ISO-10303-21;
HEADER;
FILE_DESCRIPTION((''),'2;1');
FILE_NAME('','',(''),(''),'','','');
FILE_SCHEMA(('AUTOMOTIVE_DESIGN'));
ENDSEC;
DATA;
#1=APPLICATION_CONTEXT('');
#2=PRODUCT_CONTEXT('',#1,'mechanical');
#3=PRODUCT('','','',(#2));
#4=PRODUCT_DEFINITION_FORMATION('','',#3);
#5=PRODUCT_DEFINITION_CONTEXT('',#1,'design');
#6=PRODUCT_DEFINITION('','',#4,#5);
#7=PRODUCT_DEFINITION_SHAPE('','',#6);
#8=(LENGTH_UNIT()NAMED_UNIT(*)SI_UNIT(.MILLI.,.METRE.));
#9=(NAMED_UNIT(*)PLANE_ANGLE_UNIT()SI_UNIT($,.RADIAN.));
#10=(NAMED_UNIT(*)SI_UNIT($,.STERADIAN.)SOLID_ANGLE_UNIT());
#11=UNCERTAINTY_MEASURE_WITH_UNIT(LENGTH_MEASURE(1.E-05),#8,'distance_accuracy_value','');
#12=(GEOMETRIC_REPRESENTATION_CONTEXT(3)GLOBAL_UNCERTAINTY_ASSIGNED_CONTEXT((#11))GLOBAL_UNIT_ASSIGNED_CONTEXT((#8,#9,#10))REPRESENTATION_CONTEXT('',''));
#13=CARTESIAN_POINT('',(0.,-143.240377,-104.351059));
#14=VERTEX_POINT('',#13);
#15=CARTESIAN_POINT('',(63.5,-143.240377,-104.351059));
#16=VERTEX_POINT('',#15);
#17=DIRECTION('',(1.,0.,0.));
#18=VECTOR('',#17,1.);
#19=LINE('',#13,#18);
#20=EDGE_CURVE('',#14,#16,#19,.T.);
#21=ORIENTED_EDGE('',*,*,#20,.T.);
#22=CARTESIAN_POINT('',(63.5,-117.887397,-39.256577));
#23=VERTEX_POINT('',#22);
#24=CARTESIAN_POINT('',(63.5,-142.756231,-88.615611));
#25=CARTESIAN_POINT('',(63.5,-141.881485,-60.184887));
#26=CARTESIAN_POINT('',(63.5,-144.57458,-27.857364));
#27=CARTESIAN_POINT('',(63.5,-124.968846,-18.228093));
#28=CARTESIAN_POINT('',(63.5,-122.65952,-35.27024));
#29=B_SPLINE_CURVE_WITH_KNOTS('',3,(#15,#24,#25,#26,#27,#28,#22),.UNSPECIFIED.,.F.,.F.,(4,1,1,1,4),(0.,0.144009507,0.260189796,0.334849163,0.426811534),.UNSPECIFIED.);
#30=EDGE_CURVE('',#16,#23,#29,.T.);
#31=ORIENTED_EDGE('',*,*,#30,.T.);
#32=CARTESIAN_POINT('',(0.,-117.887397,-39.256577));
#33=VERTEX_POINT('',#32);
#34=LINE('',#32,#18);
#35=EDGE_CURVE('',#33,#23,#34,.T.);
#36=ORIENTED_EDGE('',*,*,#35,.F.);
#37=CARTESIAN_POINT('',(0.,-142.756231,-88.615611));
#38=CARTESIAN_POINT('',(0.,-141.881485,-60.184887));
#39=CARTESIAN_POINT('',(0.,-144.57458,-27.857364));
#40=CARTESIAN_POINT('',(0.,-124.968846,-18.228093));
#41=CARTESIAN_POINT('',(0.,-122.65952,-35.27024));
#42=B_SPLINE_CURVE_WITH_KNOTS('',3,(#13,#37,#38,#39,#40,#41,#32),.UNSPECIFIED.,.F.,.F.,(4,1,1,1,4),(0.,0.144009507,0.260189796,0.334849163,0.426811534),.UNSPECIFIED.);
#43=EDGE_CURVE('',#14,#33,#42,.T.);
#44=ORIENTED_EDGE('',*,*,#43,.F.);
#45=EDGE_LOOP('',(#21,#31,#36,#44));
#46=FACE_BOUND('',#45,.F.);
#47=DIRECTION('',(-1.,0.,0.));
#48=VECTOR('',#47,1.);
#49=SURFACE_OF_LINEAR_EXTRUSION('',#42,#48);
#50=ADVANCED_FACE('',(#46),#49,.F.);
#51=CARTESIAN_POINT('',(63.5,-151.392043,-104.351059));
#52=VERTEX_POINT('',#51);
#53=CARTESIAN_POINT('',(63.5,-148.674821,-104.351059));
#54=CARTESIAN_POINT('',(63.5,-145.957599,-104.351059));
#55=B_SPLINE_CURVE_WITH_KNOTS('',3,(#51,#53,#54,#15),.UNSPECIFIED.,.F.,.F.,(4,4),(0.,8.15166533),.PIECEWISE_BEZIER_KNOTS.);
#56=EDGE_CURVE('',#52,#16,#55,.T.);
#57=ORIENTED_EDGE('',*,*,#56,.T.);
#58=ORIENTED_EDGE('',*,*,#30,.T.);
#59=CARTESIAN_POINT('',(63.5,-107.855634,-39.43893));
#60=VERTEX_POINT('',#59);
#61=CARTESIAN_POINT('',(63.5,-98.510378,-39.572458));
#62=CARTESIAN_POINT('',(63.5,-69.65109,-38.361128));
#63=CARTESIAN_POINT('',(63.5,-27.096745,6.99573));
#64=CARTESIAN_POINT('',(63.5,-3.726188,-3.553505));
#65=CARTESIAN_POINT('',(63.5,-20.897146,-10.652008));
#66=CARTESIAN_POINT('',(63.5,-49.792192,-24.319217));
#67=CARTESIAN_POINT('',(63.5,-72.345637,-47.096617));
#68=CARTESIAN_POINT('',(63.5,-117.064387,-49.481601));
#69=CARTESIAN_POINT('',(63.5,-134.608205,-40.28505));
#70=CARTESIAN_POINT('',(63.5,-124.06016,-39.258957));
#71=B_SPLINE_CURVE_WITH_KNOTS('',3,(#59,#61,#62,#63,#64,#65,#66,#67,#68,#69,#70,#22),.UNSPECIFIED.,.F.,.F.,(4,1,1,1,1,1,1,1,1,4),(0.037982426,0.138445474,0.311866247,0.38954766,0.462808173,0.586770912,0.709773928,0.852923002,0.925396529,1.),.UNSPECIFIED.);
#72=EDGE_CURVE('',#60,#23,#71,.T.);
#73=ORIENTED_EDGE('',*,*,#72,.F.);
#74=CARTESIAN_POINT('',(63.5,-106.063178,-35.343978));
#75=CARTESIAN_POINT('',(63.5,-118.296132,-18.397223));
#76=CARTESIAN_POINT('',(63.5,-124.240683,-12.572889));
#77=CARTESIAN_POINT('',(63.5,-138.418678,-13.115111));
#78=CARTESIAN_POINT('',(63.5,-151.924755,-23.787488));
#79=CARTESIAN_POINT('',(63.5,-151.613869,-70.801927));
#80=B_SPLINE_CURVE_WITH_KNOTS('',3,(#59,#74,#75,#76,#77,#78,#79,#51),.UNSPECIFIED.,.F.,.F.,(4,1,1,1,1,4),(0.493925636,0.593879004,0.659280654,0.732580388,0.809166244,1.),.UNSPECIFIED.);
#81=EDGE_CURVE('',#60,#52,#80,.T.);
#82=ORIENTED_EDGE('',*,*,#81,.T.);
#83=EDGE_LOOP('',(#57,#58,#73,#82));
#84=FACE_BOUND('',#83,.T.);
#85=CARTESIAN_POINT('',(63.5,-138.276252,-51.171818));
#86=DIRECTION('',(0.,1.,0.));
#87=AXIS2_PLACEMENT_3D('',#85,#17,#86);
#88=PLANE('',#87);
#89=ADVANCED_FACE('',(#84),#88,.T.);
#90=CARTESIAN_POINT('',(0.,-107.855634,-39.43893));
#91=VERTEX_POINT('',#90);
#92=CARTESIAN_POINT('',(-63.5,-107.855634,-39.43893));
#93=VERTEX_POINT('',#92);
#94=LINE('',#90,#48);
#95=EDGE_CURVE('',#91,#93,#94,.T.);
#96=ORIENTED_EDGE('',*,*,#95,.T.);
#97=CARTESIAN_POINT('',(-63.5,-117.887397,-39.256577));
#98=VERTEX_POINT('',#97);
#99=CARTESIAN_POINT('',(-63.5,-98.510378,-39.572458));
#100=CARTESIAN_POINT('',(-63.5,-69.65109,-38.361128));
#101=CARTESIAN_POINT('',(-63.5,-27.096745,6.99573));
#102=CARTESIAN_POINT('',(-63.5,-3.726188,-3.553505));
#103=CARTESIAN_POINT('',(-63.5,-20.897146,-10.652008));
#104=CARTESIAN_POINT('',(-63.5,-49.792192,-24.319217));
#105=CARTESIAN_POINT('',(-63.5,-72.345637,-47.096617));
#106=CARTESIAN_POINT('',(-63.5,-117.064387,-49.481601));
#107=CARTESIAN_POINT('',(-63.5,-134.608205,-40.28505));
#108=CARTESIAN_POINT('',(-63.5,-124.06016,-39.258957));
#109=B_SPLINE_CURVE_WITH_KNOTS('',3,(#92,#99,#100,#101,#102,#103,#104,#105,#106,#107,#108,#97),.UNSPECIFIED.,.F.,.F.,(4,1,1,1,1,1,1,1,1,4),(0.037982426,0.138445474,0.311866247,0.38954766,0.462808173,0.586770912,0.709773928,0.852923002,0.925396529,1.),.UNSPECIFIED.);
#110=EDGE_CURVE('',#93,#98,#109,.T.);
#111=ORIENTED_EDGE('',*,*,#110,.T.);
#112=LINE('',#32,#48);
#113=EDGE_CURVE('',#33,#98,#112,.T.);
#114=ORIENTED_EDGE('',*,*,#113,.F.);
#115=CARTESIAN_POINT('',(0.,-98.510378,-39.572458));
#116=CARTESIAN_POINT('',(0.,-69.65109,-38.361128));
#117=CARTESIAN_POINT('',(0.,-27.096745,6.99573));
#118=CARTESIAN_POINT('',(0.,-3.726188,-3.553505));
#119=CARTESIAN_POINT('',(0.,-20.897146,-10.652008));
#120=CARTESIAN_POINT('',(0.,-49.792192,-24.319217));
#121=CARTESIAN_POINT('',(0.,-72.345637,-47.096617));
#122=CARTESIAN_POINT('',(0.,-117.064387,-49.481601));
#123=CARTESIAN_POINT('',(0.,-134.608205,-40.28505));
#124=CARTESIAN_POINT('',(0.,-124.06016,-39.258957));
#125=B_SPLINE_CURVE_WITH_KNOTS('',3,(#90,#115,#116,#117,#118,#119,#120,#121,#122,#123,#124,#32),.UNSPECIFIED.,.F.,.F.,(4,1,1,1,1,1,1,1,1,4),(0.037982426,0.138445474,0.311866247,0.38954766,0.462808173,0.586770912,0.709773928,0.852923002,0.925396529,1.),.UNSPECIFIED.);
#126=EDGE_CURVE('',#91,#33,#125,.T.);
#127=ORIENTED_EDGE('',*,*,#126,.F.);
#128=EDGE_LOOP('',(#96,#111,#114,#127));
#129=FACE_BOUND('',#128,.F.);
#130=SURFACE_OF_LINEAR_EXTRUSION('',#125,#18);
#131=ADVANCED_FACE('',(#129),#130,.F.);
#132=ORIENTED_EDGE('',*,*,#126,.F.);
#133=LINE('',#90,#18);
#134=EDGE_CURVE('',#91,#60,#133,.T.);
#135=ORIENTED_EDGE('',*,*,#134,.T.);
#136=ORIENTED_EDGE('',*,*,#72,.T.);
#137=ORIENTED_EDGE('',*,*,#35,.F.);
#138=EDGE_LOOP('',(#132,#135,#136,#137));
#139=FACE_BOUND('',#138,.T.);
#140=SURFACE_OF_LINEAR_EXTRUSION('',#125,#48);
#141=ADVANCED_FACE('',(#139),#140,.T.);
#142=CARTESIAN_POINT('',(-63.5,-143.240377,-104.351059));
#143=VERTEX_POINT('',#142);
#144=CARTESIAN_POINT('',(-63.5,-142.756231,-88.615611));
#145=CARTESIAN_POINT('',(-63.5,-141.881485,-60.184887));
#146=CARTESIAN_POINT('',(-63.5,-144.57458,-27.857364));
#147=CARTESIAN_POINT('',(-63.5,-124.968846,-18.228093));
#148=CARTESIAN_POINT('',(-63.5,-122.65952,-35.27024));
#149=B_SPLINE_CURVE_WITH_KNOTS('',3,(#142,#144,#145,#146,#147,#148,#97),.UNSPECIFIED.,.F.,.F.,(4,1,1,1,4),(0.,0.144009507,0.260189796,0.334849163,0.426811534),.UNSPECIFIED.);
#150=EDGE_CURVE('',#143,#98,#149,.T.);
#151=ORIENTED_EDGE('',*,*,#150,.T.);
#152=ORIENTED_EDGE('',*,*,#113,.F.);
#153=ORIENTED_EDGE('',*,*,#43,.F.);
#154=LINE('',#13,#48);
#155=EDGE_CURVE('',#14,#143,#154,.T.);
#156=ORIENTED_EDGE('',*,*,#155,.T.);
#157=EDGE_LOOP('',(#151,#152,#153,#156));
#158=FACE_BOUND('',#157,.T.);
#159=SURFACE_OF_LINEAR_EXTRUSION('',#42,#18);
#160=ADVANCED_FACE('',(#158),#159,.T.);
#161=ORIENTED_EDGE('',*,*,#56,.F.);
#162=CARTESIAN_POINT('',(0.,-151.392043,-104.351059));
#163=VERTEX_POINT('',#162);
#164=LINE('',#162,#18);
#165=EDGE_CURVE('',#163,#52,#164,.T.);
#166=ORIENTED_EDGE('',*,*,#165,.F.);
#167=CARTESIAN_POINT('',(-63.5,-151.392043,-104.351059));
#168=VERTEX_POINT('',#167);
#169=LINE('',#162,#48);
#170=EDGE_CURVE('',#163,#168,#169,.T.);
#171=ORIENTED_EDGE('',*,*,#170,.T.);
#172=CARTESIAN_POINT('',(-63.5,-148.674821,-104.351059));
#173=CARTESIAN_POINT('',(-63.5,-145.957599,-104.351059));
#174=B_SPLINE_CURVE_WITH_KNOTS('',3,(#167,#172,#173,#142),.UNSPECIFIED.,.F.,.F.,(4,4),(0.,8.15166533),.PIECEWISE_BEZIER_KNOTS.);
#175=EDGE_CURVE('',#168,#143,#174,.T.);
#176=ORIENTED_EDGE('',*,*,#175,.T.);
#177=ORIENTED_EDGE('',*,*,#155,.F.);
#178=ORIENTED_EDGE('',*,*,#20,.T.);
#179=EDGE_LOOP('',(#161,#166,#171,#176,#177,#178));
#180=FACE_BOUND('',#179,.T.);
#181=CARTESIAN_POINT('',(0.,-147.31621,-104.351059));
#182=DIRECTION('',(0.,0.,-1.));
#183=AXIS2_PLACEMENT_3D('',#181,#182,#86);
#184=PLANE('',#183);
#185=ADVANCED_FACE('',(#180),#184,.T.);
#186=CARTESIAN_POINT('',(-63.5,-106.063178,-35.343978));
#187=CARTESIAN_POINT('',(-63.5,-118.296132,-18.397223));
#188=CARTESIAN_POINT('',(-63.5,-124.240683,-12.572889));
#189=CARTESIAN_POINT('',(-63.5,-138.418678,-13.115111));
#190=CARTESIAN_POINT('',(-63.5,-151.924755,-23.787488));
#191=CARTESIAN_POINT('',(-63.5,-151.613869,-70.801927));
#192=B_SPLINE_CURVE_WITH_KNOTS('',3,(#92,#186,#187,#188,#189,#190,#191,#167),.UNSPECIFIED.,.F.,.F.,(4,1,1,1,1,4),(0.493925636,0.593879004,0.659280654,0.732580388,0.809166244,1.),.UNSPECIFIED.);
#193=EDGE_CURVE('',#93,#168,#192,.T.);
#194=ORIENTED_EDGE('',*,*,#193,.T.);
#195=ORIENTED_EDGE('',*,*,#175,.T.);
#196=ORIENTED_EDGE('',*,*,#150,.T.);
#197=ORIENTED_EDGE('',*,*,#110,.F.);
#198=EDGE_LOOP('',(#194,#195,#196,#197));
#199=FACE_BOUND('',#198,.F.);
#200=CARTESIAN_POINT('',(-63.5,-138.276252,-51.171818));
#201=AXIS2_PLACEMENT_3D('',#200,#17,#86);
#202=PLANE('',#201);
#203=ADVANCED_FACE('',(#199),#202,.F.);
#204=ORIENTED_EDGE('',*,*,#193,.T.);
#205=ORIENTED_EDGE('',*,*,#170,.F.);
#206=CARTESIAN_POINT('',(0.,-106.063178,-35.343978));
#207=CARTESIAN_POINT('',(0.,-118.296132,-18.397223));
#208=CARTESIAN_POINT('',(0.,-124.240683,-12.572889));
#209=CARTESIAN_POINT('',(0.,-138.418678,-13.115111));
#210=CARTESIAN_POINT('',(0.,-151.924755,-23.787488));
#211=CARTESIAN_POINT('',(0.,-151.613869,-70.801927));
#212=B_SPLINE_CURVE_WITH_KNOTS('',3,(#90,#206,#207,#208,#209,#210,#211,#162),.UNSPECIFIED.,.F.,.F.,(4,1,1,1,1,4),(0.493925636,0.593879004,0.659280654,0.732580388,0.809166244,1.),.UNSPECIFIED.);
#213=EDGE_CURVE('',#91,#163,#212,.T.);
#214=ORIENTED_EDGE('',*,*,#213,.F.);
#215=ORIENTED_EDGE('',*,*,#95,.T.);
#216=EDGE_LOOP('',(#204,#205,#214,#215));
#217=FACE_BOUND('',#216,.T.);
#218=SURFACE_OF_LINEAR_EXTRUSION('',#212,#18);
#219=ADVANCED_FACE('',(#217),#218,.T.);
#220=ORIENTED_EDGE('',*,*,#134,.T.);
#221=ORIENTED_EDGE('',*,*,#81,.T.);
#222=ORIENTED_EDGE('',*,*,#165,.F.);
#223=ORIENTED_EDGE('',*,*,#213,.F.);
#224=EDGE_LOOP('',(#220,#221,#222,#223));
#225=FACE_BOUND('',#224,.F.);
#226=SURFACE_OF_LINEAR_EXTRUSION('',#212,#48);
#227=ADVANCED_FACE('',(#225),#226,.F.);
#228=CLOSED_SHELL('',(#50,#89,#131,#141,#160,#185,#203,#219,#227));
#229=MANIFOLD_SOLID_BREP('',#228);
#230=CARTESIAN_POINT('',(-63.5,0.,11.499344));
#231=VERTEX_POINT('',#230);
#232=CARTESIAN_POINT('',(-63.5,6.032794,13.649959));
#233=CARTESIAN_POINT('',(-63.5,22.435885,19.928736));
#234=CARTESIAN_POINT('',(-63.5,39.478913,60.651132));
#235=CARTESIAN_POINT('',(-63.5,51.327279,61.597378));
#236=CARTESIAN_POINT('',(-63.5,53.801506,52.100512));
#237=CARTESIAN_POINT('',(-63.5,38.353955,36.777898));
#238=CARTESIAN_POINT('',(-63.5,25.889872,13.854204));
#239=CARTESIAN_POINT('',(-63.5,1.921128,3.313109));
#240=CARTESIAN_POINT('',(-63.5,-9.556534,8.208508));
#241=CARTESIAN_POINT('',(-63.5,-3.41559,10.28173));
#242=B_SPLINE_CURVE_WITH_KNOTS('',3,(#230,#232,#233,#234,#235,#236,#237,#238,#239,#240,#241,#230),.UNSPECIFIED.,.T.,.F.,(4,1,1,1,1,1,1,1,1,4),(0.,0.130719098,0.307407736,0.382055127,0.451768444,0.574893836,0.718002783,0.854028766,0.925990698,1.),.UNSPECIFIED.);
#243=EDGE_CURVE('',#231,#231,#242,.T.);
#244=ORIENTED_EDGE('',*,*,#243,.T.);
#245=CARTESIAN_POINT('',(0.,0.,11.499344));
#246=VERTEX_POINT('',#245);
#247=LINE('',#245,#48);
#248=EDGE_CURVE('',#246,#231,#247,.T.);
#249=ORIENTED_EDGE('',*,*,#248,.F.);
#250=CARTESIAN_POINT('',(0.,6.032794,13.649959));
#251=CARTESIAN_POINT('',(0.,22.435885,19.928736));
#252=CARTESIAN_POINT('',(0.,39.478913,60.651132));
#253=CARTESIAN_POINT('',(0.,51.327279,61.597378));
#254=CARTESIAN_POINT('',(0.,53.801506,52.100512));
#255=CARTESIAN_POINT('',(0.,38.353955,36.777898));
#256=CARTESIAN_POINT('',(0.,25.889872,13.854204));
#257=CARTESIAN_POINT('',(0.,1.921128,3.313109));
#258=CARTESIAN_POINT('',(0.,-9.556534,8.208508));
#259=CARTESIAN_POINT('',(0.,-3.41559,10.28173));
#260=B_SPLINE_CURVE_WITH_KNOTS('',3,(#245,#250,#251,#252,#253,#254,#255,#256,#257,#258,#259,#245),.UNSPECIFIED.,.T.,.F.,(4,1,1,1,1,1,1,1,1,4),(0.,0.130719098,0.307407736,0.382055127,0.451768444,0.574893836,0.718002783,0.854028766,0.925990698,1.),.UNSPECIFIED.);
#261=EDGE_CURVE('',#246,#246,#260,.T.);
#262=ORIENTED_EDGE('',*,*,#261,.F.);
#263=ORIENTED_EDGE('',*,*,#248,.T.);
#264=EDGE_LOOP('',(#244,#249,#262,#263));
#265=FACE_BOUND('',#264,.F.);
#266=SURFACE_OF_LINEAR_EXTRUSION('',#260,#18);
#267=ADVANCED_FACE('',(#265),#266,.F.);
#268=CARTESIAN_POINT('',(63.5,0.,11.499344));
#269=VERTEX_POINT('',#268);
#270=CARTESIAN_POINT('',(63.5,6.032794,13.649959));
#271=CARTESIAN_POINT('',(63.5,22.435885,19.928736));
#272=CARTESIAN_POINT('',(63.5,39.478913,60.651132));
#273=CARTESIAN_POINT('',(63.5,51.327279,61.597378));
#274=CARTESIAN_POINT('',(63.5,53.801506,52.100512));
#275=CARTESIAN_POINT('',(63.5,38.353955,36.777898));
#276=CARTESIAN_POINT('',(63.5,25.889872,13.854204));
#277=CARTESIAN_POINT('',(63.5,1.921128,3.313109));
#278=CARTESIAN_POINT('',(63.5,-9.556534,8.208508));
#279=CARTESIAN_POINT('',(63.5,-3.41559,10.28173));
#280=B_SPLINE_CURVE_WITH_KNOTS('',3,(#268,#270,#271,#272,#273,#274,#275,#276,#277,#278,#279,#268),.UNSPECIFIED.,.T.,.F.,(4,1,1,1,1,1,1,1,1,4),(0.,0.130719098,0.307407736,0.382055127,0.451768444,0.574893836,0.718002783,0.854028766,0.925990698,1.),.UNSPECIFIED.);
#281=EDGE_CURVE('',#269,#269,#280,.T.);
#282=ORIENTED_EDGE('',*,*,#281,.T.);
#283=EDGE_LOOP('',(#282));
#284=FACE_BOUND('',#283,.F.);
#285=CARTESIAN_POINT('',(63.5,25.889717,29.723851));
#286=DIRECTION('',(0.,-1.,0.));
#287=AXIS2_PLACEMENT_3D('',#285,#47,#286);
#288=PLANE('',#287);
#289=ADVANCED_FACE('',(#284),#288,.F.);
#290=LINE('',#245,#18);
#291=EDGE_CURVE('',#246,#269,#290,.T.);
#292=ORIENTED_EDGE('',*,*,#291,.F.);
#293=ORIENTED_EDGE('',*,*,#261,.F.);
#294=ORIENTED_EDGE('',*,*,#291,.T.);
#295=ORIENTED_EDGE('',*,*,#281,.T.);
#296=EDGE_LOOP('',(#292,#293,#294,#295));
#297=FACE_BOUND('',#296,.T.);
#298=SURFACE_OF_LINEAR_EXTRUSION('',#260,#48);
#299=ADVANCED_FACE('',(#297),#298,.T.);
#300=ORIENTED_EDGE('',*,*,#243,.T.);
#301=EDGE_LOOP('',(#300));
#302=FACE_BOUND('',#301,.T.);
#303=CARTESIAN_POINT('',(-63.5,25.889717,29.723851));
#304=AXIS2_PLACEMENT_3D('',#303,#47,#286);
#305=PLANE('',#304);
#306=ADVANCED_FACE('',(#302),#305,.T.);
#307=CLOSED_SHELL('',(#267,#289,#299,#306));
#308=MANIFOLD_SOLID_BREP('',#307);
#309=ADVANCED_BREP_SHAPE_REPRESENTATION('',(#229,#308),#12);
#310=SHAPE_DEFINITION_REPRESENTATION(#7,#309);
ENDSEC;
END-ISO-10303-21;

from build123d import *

# Parameters (mm, degrees)
F1_DEPTH = 63.5


with BuildPart() as f1:
    # F0 (on Right) → F1 (new body, symmetric)
    with BuildSketch(Plane.YZ):
        with BuildLine():
            add(Edge.make_bspline(
                [(-143.2403773069, -104.3510586023), (-142.7562305545, -88.6156108717), (-141.8814850282, -60.1848867372), (-144.5745803778, -27.8573641543), (-124.9688455585, -18.2280926487), (-122.6595201023, -35.2702398919), (-117.8873968399, -39.2565765031)],
                knots=[0, 0, 0, 0, 0.144009507, 0.260189796, 0.3348491633, 0.4268115335, 0.4268115335, 0.4268115335, 0.4268115335], degree=3))
            add(Edge.make_bspline(
                [(-117.8873968399, -39.2565765031), (-114.7446942469, -39.2553643323), (-111.3888290008, -39.3884462115), (-107.8556342883, -39.4389297117)],
                knots=[0, 0, 0, 0, 0.037982426, 0.037982426, 0.037982426, 0.037982426], degree=3))
            add(Edge.make_bspline(
                [(-107.8556342883, -39.4389297117), (-106.063178392, -35.3439779029), (-118.296132153, -18.3972227692), (-124.2406833684, -12.5728886668), (-138.4186777931, -13.1151114694), (-151.9247554576, -23.7874876821), (-151.6138692557, -70.8019272139), (-151.3920426369, -104.3510586023)],
                knots=[0.4939256363, 0.4939256363, 0.4939256363, 0.4939256363, 0.5938790041, 0.6592806539, 0.732580388, 0.809166244, 1, 1, 1, 1], degree=3))
            add(Edge.make_bspline(
                [(-151.3920426369, -104.3510586023), (-148.6748208602, -104.3510586023), (-145.9575990836, -104.3510586023), (-143.2403773069, -104.3510586023)],
                knots=[0, 0, 0, 0, 8.1516653299, 8.1516653299, 8.1516653299, 8.1516653299], degree=3))
        make_face()
        with BuildLine():
            add(Edge.make_bspline(
                [(-117.8873968399, -39.2565765031), (-114.4047030965, -42.165803447), (-109.0591862239, -42.1885020642), (-107.8556342883, -39.4389297117)],
                knots=[0.4268115335, 0.4268115335, 0.4268115335, 0.4268115335, 0.4939256363, 0.4939256363, 0.4939256363, 0.4939256363], degree=3))
            add(Edge.make_bspline(
                [(-107.8556342883, -39.4389297117), (-98.5103778433, -39.5724579472), (-69.6510901191, -38.3611280454), (-27.0967446465, 6.9957296893), (-3.7261879502, -3.5535051081), (-20.8971455397, -10.6520081189), (-49.7921916514, -24.3192169011), (-72.345637494, -47.096617427), (-117.0643868308, -49.4816010583), (-134.6082046549, -40.2850495858), (-124.0601600445, -39.2589573977), (-117.8873968399, -39.2565765031)],
                knots=[0.037982426, 0.037982426, 0.037982426, 0.037982426, 0.1384454745, 0.3118662471, 0.3895476597, 0.4628081726, 0.586770912, 0.7097739282, 0.8529230016, 0.925396529, 1, 1, 1, 1], degree=3))
        make_face()
        with BuildLine():
            add(Edge.make_bspline(
                [(-117.8873968399, -39.2565765031), (-114.7446942469, -39.2553643323), (-111.3888290008, -39.3884462115), (-107.8556342883, -39.4389297117)],
                knots=[0, 0, 0, 0, 0.037982426, 0.037982426, 0.037982426, 0.037982426], degree=3))
            add(Edge.make_bspline(
                [(-117.8873968399, -39.2565765031), (-114.4047030965, -42.165803447), (-109.0591862239, -42.1885020642), (-107.8556342883, -39.4389297117)],
                knots=[0.4268115335, 0.4268115335, 0.4268115335, 0.4268115335, 0.4939256363, 0.4939256363, 0.4939256363, 0.4939256363], degree=3))
        make_face()
    extrude(amount=F1_DEPTH, both=True)


with BuildPart() as f1b:
    # F0 (on Right) → F1, piece 2 (new body, symmetric)
    with BuildSketch(Plane.YZ):
        with BuildLine():
            add(Edge.make_bspline(
                [(0, 11.4993443713), (6.0327942829, 13.6499591816), (22.435885496, 19.9287356741), (39.4789125359, 60.6511323529), (51.3272792015, 61.5973777714), (53.8015059336, 52.1005124557), (38.3539545811, 36.7778983922), (25.8898720095, 13.8542040197), (1.9211276563, 3.3131087785), (-9.5565337921, 8.2085084616), (-3.4155903862, 10.2817296265), (0, 11.4993443713)],
                knots=[0, 0, 0, 0, 0.1307190982, 0.3074077359, 0.3820551266, 0.4517684437, 0.5748938362, 0.7180027825, 0.8540287658, 0.9259906978, 1, 1, 1, 1], degree=3))
        make_face()
    extrude(amount=F1_DEPTH, both=True)


solid = Compound([f1.part, f1b.part])
